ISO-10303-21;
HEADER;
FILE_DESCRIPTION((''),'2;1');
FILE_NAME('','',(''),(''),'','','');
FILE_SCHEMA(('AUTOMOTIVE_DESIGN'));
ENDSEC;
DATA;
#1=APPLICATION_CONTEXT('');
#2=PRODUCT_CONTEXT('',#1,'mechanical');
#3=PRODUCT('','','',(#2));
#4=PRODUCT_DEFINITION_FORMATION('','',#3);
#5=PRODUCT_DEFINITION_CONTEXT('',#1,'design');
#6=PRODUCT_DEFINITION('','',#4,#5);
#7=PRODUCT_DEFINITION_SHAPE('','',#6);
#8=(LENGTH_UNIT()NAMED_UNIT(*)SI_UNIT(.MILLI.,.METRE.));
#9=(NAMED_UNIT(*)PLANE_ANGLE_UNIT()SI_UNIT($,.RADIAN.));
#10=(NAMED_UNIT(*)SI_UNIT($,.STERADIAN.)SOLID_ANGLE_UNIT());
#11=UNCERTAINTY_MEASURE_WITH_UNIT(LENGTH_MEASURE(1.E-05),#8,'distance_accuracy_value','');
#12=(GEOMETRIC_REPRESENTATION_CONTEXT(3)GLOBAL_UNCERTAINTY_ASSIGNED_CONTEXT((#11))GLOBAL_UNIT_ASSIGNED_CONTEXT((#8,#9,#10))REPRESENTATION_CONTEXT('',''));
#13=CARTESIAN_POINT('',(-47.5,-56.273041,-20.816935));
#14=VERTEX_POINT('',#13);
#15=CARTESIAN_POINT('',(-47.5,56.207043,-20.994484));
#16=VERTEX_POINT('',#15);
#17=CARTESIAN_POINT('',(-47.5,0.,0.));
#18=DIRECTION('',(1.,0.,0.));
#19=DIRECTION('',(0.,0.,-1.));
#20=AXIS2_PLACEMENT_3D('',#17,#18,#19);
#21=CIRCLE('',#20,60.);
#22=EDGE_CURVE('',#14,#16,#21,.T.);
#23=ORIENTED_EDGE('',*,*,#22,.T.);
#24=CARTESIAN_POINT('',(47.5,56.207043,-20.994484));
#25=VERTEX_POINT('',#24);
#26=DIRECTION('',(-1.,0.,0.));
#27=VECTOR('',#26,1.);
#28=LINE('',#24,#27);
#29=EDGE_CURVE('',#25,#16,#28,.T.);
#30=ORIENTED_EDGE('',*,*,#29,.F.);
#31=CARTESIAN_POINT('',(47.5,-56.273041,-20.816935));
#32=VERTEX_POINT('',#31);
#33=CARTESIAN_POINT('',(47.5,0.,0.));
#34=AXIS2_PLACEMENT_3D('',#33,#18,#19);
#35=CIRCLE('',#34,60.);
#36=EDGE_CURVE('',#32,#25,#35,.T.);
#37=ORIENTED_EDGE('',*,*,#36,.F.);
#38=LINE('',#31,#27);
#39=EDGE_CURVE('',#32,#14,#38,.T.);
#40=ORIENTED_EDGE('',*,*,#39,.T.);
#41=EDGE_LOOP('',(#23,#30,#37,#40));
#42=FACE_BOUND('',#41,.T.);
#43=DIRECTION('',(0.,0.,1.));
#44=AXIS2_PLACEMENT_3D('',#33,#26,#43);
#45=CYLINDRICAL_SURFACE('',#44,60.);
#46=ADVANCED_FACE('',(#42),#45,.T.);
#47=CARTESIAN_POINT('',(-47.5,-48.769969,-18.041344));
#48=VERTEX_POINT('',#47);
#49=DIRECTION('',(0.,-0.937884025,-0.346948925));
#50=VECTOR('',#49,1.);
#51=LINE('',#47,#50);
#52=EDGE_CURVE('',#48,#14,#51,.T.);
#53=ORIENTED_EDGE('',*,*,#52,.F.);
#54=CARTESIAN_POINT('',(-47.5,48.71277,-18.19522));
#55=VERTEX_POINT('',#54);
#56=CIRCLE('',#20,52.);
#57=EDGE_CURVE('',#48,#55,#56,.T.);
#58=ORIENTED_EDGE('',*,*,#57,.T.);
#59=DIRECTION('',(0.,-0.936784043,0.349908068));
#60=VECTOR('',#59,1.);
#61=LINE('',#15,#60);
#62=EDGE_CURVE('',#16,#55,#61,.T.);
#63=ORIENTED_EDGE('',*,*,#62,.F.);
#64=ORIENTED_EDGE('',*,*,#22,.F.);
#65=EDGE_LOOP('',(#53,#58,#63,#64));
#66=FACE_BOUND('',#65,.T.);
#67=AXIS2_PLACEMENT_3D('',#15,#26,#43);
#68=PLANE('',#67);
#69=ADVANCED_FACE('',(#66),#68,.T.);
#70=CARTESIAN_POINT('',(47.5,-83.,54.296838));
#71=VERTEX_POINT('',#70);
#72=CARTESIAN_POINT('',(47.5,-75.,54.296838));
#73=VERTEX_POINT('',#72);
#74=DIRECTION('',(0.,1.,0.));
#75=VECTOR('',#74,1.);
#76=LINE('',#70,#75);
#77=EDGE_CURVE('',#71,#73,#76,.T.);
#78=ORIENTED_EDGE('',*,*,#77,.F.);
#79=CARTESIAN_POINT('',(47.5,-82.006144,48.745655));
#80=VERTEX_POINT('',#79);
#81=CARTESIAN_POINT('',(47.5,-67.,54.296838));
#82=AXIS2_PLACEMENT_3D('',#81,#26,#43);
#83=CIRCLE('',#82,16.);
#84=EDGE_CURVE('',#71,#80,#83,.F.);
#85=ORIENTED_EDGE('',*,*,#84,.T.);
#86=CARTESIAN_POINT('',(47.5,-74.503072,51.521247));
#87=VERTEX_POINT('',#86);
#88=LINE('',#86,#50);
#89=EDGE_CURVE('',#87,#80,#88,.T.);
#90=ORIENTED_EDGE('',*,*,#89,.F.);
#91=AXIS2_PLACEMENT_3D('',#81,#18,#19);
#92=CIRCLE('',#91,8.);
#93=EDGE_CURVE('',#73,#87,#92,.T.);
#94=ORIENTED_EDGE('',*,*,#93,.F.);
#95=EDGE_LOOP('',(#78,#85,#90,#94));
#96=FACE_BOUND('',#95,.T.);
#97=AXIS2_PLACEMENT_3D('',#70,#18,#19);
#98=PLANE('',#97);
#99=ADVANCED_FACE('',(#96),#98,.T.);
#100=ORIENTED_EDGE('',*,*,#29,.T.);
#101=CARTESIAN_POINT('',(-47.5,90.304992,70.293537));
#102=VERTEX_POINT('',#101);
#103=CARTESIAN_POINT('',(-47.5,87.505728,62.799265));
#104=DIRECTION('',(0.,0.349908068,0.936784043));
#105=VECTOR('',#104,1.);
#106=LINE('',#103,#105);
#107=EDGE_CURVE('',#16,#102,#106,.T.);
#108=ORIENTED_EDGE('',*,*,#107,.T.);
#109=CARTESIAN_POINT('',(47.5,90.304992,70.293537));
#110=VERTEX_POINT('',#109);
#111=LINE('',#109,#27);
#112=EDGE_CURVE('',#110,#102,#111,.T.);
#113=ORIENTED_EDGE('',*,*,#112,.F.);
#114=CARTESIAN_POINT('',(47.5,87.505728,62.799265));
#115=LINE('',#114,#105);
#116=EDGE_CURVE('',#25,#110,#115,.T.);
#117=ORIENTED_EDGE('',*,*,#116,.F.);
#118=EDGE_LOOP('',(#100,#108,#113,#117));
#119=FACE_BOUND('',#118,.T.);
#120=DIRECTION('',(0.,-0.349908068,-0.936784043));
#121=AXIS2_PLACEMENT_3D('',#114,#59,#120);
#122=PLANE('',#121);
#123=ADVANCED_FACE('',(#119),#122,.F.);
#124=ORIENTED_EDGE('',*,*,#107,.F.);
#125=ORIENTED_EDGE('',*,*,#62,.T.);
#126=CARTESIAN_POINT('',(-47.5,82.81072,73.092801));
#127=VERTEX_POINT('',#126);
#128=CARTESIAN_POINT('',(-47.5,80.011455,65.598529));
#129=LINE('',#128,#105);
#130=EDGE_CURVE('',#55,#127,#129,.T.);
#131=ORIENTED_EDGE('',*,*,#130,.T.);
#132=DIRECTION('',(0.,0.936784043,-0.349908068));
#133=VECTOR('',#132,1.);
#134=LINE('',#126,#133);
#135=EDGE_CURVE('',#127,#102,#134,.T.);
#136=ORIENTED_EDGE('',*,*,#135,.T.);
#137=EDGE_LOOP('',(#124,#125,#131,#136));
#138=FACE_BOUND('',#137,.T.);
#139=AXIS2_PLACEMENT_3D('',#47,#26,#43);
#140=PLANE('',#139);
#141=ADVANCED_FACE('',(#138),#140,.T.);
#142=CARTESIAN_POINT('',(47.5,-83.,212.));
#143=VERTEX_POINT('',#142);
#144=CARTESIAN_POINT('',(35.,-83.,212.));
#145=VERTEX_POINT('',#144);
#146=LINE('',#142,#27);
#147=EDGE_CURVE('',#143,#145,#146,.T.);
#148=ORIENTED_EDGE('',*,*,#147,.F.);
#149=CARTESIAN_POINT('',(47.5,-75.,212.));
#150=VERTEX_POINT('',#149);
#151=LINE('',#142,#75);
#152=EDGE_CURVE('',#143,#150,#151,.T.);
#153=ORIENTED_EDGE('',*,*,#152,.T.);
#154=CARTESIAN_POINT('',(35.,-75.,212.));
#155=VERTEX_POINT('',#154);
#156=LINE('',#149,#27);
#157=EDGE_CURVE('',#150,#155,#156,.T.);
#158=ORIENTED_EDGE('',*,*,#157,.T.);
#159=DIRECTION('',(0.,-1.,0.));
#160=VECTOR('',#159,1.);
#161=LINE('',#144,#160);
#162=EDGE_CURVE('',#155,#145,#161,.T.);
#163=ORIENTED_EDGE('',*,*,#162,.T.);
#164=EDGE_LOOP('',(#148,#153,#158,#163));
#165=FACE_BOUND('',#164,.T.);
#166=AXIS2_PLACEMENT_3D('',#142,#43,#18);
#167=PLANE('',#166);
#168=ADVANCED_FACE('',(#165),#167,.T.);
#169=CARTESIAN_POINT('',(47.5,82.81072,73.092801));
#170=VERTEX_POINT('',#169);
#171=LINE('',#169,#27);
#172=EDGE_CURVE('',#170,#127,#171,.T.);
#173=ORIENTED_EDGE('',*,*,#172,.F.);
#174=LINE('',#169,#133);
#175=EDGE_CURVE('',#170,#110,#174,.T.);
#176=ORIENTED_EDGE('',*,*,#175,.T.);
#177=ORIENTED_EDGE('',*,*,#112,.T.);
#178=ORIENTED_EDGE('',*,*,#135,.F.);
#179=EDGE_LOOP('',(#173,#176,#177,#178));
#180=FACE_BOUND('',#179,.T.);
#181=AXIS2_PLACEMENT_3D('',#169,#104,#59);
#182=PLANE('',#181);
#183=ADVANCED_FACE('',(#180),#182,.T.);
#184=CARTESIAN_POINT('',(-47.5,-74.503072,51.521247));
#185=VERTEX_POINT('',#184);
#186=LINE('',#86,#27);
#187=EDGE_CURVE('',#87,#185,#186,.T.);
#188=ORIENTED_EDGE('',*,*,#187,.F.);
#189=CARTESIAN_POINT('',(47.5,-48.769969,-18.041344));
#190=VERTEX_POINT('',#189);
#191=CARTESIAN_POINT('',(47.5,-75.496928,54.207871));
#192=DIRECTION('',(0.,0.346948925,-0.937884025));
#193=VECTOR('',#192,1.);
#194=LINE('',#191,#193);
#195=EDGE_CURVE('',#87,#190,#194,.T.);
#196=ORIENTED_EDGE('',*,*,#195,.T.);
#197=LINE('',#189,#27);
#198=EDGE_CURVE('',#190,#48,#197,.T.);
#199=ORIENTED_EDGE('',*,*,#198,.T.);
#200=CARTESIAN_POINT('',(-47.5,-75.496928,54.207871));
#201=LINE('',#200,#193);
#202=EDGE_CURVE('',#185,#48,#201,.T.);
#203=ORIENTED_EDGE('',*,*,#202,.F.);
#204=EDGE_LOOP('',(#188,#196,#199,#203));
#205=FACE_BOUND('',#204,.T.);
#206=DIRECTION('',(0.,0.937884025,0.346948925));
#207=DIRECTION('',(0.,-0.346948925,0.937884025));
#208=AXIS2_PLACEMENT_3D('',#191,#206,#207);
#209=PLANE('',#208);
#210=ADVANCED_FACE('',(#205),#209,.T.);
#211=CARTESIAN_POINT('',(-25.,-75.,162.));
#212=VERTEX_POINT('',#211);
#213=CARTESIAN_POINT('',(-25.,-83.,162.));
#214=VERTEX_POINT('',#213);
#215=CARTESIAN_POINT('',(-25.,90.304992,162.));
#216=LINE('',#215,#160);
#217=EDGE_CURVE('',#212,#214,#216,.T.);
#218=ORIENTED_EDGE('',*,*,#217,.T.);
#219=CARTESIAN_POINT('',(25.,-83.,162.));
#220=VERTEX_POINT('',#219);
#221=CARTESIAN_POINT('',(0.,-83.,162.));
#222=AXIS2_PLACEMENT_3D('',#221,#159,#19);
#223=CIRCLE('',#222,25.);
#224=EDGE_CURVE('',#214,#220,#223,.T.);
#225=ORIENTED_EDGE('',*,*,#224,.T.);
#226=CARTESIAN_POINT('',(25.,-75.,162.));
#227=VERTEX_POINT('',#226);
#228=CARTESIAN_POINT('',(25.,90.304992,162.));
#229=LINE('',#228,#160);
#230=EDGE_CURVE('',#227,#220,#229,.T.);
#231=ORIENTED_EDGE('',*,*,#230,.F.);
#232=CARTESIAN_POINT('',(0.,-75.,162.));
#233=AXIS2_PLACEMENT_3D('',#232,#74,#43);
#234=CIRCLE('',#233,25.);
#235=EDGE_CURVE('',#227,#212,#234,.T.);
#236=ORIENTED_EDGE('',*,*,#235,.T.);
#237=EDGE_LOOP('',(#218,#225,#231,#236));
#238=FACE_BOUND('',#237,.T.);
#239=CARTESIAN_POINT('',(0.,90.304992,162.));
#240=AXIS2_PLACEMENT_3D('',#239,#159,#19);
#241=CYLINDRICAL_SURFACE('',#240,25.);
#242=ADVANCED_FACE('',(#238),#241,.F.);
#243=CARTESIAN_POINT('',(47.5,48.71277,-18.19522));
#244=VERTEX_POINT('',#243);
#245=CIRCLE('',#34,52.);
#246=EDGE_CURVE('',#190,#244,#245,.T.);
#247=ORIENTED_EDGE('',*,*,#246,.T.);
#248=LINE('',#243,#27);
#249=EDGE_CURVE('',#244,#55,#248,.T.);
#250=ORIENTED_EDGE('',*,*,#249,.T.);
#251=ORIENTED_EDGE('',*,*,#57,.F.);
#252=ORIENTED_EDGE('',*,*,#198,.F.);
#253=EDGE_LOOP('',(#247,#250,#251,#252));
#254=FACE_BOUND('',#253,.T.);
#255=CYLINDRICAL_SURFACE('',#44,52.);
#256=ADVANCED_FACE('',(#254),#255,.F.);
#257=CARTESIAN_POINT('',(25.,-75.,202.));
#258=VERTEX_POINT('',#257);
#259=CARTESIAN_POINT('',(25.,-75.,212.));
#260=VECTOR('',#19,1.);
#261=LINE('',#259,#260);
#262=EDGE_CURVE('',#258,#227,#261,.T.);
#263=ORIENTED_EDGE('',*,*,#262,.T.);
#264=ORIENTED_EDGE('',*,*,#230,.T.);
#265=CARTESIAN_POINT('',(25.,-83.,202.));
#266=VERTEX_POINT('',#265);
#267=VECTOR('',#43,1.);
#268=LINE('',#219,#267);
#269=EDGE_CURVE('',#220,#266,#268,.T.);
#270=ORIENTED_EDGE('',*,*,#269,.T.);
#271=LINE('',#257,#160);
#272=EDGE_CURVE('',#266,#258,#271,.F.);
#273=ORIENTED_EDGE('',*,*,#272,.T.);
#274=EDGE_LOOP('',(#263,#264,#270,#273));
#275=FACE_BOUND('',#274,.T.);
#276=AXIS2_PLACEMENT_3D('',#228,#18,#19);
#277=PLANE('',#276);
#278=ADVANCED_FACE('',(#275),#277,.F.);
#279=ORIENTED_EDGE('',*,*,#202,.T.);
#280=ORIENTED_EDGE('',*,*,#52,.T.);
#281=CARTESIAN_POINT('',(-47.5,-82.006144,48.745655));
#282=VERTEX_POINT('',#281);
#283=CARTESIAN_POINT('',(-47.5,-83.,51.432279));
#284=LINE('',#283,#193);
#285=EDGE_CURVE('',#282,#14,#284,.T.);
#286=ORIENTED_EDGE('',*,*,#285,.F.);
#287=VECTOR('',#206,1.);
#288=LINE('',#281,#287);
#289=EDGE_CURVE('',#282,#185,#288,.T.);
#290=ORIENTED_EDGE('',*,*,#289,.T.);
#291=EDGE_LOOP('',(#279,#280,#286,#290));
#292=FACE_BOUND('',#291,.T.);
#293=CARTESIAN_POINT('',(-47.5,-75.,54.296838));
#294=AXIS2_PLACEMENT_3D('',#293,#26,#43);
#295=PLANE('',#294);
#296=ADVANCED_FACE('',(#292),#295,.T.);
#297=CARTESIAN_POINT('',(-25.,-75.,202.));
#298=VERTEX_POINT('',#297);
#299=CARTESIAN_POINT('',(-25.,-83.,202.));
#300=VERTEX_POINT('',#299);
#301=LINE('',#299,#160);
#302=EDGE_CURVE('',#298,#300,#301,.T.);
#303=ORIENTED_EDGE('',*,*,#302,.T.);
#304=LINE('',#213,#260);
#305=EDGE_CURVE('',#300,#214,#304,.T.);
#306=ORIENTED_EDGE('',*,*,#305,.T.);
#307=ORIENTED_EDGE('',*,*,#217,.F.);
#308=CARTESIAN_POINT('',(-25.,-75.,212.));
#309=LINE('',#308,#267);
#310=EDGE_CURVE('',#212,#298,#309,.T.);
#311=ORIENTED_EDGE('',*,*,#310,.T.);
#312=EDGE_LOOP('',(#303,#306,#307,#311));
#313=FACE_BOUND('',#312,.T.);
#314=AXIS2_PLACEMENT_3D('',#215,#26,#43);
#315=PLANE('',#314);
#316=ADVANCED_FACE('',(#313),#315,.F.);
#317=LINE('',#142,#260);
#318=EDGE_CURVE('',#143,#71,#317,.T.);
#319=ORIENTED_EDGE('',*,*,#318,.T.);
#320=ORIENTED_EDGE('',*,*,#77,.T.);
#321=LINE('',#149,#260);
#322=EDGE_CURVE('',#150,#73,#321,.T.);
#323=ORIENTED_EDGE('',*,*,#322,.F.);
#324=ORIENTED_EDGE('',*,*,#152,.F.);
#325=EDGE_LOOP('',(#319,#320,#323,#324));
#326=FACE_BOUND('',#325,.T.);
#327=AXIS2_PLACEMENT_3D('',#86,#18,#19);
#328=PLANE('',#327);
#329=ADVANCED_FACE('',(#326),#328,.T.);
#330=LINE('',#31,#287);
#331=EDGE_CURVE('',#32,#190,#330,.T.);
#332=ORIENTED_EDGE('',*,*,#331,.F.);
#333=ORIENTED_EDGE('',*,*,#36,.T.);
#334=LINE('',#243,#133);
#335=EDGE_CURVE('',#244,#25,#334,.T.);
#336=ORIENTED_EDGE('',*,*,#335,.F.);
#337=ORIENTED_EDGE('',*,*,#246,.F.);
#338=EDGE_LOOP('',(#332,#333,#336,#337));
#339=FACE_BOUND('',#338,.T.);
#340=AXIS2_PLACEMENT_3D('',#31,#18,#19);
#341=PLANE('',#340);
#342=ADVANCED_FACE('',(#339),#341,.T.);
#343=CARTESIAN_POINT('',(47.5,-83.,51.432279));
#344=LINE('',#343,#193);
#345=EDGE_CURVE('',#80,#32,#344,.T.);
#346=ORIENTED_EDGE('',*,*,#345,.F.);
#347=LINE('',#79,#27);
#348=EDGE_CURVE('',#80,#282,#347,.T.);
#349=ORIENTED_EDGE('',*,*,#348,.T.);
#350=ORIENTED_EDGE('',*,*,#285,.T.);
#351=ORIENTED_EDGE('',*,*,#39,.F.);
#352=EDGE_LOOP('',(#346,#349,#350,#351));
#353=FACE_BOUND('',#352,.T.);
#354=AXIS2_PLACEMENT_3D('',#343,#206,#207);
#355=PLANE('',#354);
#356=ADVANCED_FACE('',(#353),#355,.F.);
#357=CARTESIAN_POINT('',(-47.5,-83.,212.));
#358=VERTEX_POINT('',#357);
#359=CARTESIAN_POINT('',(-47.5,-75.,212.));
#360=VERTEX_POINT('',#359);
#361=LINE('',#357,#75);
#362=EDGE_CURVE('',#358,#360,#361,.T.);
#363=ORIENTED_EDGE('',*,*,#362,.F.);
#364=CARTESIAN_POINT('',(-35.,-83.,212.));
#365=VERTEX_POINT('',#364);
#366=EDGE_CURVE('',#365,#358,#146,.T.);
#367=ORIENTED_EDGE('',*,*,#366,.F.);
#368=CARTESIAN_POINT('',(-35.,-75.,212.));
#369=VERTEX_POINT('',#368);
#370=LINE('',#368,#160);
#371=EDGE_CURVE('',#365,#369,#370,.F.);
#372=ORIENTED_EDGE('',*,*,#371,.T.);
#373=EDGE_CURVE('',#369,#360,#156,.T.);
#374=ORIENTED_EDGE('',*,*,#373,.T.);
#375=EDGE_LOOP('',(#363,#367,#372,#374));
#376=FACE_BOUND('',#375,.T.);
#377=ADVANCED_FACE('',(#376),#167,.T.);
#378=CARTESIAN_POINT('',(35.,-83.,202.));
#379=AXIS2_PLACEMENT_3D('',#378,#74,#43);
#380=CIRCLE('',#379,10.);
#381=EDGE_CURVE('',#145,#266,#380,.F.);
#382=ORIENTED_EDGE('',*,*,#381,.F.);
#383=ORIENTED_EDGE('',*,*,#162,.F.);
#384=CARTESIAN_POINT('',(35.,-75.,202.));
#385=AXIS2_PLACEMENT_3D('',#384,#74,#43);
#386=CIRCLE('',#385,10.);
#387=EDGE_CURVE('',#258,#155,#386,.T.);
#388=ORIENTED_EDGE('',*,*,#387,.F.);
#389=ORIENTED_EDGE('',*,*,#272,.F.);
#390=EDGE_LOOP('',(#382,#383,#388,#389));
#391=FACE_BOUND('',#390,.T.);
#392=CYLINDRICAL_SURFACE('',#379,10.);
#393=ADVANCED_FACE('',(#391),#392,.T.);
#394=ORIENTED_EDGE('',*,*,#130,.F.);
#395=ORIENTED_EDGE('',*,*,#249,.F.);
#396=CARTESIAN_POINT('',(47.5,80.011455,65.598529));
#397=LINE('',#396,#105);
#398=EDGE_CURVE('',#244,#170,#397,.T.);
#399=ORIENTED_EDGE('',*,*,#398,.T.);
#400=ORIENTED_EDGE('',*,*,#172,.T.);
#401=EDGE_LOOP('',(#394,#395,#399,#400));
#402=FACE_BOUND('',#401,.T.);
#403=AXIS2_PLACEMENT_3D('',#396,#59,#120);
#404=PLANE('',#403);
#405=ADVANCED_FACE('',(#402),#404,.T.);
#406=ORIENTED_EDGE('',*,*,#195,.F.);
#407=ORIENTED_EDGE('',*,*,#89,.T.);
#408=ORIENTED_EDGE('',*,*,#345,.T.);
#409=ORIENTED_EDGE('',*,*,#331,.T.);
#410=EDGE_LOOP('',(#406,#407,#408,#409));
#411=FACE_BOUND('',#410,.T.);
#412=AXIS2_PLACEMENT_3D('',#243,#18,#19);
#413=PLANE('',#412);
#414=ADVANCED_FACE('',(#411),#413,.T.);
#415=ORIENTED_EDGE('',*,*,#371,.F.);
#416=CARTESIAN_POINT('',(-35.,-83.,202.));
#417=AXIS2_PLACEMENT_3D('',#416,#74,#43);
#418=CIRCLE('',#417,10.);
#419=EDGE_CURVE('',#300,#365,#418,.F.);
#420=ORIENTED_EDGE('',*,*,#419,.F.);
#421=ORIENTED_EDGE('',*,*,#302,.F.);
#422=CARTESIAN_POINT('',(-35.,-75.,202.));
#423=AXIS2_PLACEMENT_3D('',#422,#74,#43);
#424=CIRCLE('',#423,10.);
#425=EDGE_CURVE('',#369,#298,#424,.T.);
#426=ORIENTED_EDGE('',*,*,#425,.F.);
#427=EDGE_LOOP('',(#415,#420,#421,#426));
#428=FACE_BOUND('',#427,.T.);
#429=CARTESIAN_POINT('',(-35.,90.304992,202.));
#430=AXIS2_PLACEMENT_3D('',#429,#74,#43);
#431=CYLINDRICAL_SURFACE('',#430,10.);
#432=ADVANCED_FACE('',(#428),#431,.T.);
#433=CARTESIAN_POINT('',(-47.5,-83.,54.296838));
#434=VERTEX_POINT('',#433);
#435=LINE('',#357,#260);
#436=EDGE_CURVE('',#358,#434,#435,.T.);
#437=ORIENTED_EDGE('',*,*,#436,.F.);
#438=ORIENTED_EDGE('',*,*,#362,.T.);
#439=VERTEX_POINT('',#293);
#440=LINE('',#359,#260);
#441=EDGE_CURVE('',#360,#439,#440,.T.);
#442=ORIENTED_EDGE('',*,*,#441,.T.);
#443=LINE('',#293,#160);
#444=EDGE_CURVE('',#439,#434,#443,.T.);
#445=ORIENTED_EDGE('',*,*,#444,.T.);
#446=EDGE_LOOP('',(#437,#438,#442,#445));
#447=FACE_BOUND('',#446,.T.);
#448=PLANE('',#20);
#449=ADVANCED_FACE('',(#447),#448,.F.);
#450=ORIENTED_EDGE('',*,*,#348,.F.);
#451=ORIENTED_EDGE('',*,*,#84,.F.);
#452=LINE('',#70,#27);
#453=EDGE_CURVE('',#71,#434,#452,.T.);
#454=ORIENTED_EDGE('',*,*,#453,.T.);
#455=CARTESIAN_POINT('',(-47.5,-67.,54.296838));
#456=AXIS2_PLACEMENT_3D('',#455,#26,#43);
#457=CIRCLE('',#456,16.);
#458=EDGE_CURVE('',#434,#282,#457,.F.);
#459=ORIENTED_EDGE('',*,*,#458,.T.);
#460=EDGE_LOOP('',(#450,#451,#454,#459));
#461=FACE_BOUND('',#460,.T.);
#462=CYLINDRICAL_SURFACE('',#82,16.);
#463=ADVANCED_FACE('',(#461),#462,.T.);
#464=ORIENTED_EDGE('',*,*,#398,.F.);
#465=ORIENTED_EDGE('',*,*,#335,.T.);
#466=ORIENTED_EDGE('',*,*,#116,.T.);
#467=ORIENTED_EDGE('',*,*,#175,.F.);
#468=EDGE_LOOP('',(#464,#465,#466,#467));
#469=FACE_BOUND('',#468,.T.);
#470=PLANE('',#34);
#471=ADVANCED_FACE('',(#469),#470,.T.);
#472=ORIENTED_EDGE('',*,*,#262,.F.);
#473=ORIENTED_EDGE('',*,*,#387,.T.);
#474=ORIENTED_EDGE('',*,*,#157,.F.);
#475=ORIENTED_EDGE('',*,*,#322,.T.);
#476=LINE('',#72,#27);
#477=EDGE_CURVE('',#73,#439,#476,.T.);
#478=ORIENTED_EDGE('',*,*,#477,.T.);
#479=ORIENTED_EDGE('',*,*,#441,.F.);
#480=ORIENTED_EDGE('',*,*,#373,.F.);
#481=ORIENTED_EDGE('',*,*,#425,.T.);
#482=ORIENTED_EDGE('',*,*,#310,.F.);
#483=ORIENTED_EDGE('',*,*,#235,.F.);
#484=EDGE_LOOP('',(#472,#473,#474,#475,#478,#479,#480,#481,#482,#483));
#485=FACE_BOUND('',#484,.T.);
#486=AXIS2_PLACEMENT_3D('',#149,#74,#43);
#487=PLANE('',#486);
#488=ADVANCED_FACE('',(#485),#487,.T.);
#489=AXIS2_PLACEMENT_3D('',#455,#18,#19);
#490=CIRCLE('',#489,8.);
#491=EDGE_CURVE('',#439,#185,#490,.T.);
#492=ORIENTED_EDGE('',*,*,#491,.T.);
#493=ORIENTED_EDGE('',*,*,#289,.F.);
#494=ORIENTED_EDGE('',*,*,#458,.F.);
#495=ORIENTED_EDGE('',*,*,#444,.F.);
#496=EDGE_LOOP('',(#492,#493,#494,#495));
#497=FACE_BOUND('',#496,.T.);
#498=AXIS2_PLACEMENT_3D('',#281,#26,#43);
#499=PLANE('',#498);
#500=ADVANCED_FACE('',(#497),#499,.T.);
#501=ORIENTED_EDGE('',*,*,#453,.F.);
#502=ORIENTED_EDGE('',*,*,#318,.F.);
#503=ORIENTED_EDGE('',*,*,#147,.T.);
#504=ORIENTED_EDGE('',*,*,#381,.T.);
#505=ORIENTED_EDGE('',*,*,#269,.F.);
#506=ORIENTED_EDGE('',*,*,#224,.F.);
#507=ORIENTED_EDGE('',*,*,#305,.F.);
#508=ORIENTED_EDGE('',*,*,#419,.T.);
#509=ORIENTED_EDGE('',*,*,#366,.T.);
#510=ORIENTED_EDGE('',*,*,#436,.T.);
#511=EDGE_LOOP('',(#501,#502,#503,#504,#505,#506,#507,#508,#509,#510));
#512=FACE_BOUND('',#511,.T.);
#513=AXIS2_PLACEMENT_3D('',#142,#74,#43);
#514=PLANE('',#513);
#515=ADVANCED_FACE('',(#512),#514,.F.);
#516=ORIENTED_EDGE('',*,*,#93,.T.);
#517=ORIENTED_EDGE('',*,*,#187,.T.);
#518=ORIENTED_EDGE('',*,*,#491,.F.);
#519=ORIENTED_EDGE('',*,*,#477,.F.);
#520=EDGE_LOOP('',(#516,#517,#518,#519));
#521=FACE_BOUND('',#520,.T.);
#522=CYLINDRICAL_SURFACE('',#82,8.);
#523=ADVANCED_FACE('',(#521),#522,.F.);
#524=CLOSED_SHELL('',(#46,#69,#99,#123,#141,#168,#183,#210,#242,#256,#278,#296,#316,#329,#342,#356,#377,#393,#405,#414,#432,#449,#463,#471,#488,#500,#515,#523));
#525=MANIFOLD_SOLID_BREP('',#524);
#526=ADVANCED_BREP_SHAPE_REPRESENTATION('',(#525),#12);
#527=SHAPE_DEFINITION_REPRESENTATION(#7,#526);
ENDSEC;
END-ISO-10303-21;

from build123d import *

# Parameters (mm, degrees)
SM_START               = -47.5
SM_BASE_FLANGE_1_DEPTH = 95
CUT_EXTRUDE_1_DEPTH    = 278.911623222
FILLET_1_R             = 10


# Read off the part's stored shape, not the designer's step: 基体-法兰1
with BuildPart() as part:
    # 基体-法兰1 outline → 基体-法兰1 (new body)
    with BuildSketch(Plane(origin=(0, 0, 0), x_dir=(0, 0, -1), z_dir=(1, 0, 0)).offset(SM_START)):
        with BuildLine():
            Line((20.994484106, 56.207042593), (-70.293536893, 90.304992202))
            Line((-70.293536893, 90.304992202), (-73.092801441, 82.810719856))
            Line((-73.092801441, 82.810719856), (18.195219559, 48.712770248))
            ThreePointArc((18.195219559, 48.712770248), (51.999935218, -0.082081346), (18.041344088, -48.769969279))
            Line((18.041344088, -48.769969279), (-51.521246849, -74.503072197))
            ThreePointArc((-51.521246849, -74.503072197), (-52.886976122, -74.874788174), (-54.296838247, -75))
            Line((-54.296838247, -75), (-212, -75))
            Line((-212, -75), (-212, -83))
            Line((-212, -83), (-54.296838247, -83))
            ThreePointArc((-54.296838247, -83), (-51.477113996, -82.749576348), (-48.74565545, -82.006144394))
            Line((-48.74565545, -82.006144394), (20.816935486, -56.273041476))
            ThreePointArc((20.816935486, -56.273041476), (59.999925251, -0.094709246), (20.994484106, 56.207042593))
        make_face()
    extrude(amount=SM_BASE_FLANGE_1_DEPTH)

    # 草图6 → 切除-拉伸1 (cut, through all)
    with BuildSketch(Plane.XZ.offset(83)):
        with BuildLine():
            Line((-25, 162), (-25, 212))
            Line((-25, 212), (25, 212))
            Line((25, 212), (25, 162))
            ThreePointArc((25, 162), (0, 137), (-25, 162))
        make_face()
    extrude(amount=-CUT_EXTRUDE_1_DEPTH, mode=Mode.SUBTRACT)

    # 圆角1
    fillet_1_edges = [part.edges().sort_by_distance(p)[0] for p in [
        (-25, -79, 212),
        (25, -79, 212),
    ]]
    fillet(fillet_1_edges, radius=FILLET_1_R)


solid = part.part
